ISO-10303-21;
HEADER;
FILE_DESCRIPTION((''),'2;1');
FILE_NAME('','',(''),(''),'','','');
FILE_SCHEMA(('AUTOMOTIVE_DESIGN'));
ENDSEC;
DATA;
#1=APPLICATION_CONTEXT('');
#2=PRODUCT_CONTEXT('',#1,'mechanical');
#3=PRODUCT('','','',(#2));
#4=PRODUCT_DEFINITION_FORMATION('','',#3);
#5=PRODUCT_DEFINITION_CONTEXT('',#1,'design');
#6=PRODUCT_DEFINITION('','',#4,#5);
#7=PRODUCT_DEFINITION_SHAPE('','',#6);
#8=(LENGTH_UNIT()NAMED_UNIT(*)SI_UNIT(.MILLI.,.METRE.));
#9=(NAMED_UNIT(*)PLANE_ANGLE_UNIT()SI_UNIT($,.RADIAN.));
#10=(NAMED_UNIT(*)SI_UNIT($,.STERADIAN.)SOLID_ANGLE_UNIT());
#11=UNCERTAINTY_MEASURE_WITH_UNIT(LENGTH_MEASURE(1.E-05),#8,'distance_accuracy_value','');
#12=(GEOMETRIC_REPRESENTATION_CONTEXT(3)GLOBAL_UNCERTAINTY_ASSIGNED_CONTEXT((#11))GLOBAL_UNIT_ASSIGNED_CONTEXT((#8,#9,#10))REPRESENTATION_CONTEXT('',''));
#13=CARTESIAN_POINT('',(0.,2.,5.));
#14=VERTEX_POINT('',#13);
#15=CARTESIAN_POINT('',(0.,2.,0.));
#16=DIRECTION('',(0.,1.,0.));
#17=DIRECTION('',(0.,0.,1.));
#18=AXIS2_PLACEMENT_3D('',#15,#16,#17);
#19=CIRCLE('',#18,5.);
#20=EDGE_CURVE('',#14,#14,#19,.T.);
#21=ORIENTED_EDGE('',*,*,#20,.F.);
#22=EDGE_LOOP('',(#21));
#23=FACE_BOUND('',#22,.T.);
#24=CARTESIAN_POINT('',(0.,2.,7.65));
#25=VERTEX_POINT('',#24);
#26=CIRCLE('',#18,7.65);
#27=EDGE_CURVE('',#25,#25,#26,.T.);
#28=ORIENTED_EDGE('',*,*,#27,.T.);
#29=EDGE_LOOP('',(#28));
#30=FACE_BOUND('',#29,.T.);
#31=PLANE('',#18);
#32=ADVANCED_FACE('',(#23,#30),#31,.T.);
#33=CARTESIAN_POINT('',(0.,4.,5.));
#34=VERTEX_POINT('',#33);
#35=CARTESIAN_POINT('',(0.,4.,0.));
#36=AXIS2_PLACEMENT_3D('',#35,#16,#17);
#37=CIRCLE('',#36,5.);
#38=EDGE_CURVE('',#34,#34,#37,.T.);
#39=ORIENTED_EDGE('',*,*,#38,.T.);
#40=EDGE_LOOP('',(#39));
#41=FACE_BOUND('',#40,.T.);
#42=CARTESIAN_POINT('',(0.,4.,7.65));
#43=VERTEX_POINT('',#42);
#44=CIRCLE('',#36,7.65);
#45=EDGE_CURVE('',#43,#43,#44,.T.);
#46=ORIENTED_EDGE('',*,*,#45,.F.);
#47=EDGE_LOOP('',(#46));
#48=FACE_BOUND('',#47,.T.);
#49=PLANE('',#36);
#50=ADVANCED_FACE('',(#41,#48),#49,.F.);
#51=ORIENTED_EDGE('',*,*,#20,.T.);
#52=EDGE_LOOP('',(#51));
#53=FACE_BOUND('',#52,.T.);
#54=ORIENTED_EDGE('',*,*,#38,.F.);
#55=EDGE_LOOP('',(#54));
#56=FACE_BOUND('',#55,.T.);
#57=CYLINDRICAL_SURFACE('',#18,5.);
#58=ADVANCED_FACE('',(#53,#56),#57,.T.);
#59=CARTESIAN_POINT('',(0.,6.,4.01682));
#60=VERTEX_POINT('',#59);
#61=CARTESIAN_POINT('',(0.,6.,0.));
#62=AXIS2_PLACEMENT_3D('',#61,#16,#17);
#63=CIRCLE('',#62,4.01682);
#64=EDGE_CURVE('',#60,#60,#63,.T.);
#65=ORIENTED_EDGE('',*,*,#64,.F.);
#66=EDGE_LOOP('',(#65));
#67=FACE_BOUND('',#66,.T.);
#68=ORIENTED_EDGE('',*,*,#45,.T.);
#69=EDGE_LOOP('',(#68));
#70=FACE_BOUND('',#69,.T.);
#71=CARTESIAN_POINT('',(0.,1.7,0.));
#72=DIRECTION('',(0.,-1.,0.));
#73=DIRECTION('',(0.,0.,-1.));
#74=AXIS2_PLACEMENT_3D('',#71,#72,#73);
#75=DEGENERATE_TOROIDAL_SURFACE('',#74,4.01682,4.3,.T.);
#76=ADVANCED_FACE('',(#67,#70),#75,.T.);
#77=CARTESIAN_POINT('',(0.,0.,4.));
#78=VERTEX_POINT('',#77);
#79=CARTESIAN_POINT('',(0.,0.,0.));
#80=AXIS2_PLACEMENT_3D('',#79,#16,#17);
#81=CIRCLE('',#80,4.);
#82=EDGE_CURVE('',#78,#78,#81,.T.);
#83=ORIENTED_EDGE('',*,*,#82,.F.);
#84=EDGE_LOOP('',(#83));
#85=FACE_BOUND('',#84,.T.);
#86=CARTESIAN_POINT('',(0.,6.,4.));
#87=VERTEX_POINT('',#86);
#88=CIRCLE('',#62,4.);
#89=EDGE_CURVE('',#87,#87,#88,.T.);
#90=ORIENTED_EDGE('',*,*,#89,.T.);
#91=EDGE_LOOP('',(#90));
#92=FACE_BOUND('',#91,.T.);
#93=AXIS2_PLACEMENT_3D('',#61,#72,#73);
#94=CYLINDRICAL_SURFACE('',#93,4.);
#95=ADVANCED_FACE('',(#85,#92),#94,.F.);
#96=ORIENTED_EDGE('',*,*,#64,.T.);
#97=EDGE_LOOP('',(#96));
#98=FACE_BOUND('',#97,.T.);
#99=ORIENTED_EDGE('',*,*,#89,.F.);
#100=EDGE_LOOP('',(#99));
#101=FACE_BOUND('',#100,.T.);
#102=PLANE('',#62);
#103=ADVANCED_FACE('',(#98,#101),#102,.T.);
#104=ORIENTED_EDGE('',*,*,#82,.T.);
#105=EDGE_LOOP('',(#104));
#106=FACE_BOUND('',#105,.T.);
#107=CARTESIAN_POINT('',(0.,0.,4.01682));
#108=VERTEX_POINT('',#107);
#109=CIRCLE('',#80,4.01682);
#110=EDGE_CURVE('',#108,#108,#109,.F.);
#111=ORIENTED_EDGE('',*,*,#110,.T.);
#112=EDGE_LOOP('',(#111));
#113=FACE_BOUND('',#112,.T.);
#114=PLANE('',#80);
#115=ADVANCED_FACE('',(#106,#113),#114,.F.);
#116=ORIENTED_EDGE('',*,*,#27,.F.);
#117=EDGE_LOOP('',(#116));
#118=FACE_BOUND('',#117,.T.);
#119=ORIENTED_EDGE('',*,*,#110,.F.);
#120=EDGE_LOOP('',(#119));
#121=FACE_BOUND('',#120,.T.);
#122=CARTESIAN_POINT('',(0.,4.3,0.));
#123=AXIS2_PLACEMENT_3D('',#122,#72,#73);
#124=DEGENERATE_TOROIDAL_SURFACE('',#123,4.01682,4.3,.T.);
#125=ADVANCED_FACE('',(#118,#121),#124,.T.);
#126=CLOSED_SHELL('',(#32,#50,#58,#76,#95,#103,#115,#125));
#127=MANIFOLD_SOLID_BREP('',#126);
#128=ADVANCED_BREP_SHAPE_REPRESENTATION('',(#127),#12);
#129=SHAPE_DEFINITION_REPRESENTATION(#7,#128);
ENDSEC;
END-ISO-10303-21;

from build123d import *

# Parameters (mm, degrees)
SKETCH1_R           = 7.65
SKETCH1_R_2         = 4
BOSS_EXTRUDE1_DEPTH = 6
SKETCH2_R           = 7.65
SKETCH2_R_2         = 5
CUT_EXTRUDE1_DEPTH  = 1
FILLET1_R           = 4.3


with BuildPart() as part:
    # Sketch1 → Boss-Extrude1 (new body)
    with BuildSketch(Plane(origin=(0, 0, 0), x_dir=(1, 0, 0), z_dir=(0, 1, 0))):
        with Locations(Location((0, 0, 0), (0, 0, 270))):
            Circle(SKETCH1_R)
        with Locations(Location((0, 0, 0), (0, 0, 270))):
            Circle(SKETCH1_R_2, mode=Mode.SUBTRACT)
    extrude(amount=BOSS_EXTRUDE1_DEPTH)

    # Sketch2 → Cut-Extrude1 (cut, symmetric)
    with BuildSketch(Plane(origin=(0, 3, 0), x_dir=(1, 0, 0), z_dir=(0, 1, 0))):
        with Locations(Location((0, 0, 0), (0, 0, 270))):
            Circle(SKETCH2_R)
        with Locations(Location((0, 0, 0), (0, 0, 270))):
            Circle(SKETCH2_R_2, mode=Mode.SUBTRACT)
    extrude(amount=CUT_EXTRUDE1_DEPTH, both=True, mode=Mode.SUBTRACT)

    # Fillet1
    # the kernel refuses this fillet: 4.3 mm, written as the material it takes off along each edge
    with BuildSketch(Plane(origin=(0, 0, 0), x_dir=(0, 0, 1), z_dir=(-1, 0, 0))) as fillet1_piece_1:
        with BuildLine():
            CenterArc((4.016819575, 4.3), FILLET1_R, 270, 57.663974002)
            Line((4.016819575, 0), (7.65, 0))
            Line((7.65, 0), (7.65, 2))
        make_face()
    revolve(axis=Axis((0, 0, 0), (0, 1, 0)), mode=Mode.SUBTRACT)
    with BuildSketch(Plane(origin=(0, 6, 0), x_dir=(0, 0, 1), z_dir=(-1, 0, 0))) as fillet1_piece_2:
        with BuildLine():
            CenterArc((4.016819575, -4.3), FILLET1_R, 32.336025998, 57.663974002)
            Line((7.65, -2), (7.65, 0))
            Line((7.65, 0), (4.016819575, 0))
        make_face()
    revolve(axis=Axis((0, 6, 0), (0, 1, 0)), mode=Mode.SUBTRACT)


solid = part.part
